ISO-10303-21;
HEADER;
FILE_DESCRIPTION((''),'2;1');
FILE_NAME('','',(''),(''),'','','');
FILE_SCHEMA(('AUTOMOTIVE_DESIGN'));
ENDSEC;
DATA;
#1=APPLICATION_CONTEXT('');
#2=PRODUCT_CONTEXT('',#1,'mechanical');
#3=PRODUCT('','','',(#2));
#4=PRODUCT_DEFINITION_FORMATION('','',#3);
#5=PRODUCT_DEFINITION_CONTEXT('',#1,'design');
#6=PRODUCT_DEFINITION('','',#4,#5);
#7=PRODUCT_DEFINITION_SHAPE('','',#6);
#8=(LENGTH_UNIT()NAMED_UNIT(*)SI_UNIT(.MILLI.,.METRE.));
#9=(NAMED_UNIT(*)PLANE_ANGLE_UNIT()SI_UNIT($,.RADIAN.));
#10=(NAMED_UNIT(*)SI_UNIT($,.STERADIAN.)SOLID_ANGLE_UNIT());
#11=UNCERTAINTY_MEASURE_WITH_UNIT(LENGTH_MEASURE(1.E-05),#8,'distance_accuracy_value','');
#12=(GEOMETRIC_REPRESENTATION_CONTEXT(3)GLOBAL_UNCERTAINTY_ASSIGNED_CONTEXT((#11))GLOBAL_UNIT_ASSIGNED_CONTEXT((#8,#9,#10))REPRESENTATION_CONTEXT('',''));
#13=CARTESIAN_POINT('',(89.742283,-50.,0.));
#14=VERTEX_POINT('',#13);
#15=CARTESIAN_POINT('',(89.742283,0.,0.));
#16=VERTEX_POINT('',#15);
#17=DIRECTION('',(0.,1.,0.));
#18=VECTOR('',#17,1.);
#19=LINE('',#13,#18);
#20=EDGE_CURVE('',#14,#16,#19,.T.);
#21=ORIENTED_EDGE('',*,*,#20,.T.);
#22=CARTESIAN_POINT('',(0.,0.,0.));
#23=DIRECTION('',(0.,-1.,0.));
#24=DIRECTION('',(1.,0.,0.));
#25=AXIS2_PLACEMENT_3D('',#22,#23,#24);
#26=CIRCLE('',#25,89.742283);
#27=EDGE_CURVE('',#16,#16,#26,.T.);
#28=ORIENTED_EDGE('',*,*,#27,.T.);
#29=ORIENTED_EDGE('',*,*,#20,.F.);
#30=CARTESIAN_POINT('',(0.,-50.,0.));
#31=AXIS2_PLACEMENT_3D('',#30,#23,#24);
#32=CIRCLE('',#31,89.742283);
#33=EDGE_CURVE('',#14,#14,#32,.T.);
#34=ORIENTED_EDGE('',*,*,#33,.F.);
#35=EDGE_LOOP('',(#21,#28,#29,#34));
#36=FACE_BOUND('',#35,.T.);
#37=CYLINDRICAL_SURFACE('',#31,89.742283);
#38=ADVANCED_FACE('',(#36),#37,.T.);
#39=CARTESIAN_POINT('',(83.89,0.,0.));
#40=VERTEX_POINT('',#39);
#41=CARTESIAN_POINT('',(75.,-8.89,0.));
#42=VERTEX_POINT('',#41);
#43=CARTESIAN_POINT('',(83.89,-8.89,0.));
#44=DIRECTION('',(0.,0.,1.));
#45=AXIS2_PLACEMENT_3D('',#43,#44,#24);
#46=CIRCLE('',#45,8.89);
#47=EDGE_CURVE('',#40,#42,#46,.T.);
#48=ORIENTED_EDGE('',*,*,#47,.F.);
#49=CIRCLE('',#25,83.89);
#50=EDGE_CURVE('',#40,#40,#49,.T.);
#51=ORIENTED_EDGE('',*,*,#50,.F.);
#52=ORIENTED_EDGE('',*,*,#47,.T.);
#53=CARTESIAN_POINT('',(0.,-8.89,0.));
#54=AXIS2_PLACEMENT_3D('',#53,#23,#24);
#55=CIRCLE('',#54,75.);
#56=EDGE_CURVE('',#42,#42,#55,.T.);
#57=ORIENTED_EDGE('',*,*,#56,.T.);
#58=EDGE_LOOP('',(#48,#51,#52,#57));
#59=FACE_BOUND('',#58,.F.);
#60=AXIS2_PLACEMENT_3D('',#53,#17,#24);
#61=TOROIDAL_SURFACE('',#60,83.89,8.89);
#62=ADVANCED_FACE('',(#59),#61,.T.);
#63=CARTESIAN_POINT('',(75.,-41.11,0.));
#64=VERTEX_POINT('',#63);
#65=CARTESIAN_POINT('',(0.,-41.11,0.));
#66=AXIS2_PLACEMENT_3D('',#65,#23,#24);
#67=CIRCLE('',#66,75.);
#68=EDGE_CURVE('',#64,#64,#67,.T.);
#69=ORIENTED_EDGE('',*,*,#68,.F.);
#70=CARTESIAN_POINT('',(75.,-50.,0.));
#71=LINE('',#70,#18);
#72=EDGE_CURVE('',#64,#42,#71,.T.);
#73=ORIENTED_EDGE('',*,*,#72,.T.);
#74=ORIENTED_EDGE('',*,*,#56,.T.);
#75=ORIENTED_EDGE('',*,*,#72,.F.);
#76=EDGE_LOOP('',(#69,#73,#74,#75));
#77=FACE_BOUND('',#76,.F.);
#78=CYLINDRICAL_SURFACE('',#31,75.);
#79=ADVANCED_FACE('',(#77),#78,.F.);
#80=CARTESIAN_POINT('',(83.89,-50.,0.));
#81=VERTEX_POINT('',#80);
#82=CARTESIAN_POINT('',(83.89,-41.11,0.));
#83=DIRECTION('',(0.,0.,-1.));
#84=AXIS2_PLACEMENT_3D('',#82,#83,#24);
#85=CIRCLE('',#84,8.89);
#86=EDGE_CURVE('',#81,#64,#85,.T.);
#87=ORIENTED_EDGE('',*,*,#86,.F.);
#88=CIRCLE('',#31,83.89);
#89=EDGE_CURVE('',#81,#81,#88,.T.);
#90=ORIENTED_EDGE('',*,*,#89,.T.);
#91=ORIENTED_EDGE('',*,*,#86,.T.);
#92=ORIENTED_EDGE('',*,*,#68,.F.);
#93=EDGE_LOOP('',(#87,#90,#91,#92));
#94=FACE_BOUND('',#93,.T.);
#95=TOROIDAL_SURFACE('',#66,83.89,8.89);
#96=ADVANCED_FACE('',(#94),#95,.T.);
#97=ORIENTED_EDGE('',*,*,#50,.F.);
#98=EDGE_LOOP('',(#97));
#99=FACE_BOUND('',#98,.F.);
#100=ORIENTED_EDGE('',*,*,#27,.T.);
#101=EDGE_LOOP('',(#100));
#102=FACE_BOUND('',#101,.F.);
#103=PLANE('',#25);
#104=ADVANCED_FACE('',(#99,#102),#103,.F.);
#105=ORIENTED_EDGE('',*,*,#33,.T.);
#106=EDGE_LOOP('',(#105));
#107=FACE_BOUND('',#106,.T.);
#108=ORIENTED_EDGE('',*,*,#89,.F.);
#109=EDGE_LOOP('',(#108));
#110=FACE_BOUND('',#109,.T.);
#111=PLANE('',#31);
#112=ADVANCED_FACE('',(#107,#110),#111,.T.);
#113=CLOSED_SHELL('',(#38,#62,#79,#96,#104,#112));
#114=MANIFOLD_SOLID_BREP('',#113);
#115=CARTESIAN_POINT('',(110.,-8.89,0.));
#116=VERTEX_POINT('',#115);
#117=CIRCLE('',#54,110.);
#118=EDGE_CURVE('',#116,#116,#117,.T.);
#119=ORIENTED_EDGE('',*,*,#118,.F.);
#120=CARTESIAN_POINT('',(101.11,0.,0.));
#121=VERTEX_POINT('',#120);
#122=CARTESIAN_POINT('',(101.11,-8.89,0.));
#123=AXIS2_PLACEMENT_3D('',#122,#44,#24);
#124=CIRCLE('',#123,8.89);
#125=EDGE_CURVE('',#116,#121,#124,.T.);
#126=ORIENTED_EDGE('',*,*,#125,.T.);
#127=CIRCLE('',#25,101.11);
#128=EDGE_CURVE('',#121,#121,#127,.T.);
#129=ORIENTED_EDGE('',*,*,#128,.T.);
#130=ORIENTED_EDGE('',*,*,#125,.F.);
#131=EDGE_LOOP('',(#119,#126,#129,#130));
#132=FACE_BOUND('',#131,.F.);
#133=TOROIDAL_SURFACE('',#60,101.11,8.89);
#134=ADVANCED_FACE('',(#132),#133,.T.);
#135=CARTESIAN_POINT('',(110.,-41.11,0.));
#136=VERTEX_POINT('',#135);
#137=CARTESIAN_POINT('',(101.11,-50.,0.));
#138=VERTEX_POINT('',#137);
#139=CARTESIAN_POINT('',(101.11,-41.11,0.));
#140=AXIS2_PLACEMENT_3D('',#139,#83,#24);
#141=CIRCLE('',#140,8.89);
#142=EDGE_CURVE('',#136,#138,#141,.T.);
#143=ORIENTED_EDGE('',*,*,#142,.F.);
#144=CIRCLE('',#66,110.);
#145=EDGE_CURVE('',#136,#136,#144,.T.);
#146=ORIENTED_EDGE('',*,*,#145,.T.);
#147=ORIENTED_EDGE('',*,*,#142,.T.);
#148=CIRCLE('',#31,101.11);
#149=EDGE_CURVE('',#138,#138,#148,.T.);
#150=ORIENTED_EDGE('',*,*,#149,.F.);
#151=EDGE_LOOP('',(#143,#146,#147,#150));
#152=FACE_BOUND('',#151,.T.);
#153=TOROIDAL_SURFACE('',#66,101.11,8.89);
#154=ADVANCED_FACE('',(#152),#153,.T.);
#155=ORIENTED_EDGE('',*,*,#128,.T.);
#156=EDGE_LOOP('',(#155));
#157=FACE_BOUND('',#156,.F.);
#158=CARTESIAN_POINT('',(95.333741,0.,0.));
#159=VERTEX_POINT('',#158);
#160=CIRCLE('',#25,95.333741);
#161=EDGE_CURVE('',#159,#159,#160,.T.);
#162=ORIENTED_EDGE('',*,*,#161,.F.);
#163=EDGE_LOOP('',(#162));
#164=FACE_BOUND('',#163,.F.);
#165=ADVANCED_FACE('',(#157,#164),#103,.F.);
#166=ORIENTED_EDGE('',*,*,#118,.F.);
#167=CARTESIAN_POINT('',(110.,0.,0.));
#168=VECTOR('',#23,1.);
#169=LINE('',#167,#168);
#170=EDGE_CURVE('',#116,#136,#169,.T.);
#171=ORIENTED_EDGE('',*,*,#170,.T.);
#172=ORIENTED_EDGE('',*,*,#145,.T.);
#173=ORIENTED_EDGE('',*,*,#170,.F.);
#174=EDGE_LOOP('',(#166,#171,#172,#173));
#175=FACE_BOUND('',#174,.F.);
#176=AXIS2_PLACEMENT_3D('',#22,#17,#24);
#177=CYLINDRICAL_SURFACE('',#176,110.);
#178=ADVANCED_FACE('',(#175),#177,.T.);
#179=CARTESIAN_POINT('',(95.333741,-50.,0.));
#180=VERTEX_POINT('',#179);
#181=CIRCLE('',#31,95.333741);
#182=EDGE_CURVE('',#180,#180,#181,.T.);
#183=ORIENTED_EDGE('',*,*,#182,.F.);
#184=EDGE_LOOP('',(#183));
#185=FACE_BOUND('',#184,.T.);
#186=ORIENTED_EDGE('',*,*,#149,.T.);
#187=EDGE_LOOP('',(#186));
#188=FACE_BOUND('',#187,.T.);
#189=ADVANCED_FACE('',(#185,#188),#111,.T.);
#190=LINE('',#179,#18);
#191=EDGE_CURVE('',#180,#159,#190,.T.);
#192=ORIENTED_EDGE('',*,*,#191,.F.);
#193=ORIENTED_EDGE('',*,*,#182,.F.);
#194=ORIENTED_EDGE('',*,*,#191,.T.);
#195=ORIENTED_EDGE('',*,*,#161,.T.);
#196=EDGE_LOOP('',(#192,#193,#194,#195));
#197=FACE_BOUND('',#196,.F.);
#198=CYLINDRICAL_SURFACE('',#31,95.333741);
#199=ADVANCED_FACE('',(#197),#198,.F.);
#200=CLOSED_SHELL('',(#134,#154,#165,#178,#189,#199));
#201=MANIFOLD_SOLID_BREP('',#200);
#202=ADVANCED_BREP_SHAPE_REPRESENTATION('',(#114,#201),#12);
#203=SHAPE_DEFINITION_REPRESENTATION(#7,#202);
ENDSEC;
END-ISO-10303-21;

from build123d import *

# Parameters (mm, degrees)
F0_R     = 110
F1_DEPTH = 50
F2_R     = 75
F3_DEPTH = 50.001
F7_R     = 8.89
F8_R     = 95.3337412029
F8_R_2   = 89.742282657
F9_DEPTH = 50.001


# Not quite as in the source:
# - the program builds the solid bodies; features that only make, move or delete a surface that nothing else refers to are left out


with BuildPart() as f1:
    # F0 (on Front) → F1 (new body)
    with BuildSketch(Plane.XZ):
        Circle(F0_R)
    extrude(amount=F1_DEPTH)

    # F2 (on face) → F3 (cut, through all)
    with BuildSketch(Plane.XZ.offset(50)):
        Circle(F2_R)
    extrude(amount=-F3_DEPTH, mode=Mode.SUBTRACT)

    # F7
    f7_edges = [f1.edges().sort_by_distance(p)[0] for p in [
        (-110, -50, 0),
        (-75, -50, 0),
        (-110, 0, 0),
        (-75, 0, 0),
    ]]
    fillet(f7_edges, radius=F7_R)

    # F8 (on face) → F9 (cut, through all)
    with BuildSketch(Plane.XZ.offset(50)):
        Circle(F8_R)
        Circle(F8_R_2, mode=Mode.SUBTRACT)
    extrude(amount=-F9_DEPTH, mode=Mode.SUBTRACT)


solid = f1.part
